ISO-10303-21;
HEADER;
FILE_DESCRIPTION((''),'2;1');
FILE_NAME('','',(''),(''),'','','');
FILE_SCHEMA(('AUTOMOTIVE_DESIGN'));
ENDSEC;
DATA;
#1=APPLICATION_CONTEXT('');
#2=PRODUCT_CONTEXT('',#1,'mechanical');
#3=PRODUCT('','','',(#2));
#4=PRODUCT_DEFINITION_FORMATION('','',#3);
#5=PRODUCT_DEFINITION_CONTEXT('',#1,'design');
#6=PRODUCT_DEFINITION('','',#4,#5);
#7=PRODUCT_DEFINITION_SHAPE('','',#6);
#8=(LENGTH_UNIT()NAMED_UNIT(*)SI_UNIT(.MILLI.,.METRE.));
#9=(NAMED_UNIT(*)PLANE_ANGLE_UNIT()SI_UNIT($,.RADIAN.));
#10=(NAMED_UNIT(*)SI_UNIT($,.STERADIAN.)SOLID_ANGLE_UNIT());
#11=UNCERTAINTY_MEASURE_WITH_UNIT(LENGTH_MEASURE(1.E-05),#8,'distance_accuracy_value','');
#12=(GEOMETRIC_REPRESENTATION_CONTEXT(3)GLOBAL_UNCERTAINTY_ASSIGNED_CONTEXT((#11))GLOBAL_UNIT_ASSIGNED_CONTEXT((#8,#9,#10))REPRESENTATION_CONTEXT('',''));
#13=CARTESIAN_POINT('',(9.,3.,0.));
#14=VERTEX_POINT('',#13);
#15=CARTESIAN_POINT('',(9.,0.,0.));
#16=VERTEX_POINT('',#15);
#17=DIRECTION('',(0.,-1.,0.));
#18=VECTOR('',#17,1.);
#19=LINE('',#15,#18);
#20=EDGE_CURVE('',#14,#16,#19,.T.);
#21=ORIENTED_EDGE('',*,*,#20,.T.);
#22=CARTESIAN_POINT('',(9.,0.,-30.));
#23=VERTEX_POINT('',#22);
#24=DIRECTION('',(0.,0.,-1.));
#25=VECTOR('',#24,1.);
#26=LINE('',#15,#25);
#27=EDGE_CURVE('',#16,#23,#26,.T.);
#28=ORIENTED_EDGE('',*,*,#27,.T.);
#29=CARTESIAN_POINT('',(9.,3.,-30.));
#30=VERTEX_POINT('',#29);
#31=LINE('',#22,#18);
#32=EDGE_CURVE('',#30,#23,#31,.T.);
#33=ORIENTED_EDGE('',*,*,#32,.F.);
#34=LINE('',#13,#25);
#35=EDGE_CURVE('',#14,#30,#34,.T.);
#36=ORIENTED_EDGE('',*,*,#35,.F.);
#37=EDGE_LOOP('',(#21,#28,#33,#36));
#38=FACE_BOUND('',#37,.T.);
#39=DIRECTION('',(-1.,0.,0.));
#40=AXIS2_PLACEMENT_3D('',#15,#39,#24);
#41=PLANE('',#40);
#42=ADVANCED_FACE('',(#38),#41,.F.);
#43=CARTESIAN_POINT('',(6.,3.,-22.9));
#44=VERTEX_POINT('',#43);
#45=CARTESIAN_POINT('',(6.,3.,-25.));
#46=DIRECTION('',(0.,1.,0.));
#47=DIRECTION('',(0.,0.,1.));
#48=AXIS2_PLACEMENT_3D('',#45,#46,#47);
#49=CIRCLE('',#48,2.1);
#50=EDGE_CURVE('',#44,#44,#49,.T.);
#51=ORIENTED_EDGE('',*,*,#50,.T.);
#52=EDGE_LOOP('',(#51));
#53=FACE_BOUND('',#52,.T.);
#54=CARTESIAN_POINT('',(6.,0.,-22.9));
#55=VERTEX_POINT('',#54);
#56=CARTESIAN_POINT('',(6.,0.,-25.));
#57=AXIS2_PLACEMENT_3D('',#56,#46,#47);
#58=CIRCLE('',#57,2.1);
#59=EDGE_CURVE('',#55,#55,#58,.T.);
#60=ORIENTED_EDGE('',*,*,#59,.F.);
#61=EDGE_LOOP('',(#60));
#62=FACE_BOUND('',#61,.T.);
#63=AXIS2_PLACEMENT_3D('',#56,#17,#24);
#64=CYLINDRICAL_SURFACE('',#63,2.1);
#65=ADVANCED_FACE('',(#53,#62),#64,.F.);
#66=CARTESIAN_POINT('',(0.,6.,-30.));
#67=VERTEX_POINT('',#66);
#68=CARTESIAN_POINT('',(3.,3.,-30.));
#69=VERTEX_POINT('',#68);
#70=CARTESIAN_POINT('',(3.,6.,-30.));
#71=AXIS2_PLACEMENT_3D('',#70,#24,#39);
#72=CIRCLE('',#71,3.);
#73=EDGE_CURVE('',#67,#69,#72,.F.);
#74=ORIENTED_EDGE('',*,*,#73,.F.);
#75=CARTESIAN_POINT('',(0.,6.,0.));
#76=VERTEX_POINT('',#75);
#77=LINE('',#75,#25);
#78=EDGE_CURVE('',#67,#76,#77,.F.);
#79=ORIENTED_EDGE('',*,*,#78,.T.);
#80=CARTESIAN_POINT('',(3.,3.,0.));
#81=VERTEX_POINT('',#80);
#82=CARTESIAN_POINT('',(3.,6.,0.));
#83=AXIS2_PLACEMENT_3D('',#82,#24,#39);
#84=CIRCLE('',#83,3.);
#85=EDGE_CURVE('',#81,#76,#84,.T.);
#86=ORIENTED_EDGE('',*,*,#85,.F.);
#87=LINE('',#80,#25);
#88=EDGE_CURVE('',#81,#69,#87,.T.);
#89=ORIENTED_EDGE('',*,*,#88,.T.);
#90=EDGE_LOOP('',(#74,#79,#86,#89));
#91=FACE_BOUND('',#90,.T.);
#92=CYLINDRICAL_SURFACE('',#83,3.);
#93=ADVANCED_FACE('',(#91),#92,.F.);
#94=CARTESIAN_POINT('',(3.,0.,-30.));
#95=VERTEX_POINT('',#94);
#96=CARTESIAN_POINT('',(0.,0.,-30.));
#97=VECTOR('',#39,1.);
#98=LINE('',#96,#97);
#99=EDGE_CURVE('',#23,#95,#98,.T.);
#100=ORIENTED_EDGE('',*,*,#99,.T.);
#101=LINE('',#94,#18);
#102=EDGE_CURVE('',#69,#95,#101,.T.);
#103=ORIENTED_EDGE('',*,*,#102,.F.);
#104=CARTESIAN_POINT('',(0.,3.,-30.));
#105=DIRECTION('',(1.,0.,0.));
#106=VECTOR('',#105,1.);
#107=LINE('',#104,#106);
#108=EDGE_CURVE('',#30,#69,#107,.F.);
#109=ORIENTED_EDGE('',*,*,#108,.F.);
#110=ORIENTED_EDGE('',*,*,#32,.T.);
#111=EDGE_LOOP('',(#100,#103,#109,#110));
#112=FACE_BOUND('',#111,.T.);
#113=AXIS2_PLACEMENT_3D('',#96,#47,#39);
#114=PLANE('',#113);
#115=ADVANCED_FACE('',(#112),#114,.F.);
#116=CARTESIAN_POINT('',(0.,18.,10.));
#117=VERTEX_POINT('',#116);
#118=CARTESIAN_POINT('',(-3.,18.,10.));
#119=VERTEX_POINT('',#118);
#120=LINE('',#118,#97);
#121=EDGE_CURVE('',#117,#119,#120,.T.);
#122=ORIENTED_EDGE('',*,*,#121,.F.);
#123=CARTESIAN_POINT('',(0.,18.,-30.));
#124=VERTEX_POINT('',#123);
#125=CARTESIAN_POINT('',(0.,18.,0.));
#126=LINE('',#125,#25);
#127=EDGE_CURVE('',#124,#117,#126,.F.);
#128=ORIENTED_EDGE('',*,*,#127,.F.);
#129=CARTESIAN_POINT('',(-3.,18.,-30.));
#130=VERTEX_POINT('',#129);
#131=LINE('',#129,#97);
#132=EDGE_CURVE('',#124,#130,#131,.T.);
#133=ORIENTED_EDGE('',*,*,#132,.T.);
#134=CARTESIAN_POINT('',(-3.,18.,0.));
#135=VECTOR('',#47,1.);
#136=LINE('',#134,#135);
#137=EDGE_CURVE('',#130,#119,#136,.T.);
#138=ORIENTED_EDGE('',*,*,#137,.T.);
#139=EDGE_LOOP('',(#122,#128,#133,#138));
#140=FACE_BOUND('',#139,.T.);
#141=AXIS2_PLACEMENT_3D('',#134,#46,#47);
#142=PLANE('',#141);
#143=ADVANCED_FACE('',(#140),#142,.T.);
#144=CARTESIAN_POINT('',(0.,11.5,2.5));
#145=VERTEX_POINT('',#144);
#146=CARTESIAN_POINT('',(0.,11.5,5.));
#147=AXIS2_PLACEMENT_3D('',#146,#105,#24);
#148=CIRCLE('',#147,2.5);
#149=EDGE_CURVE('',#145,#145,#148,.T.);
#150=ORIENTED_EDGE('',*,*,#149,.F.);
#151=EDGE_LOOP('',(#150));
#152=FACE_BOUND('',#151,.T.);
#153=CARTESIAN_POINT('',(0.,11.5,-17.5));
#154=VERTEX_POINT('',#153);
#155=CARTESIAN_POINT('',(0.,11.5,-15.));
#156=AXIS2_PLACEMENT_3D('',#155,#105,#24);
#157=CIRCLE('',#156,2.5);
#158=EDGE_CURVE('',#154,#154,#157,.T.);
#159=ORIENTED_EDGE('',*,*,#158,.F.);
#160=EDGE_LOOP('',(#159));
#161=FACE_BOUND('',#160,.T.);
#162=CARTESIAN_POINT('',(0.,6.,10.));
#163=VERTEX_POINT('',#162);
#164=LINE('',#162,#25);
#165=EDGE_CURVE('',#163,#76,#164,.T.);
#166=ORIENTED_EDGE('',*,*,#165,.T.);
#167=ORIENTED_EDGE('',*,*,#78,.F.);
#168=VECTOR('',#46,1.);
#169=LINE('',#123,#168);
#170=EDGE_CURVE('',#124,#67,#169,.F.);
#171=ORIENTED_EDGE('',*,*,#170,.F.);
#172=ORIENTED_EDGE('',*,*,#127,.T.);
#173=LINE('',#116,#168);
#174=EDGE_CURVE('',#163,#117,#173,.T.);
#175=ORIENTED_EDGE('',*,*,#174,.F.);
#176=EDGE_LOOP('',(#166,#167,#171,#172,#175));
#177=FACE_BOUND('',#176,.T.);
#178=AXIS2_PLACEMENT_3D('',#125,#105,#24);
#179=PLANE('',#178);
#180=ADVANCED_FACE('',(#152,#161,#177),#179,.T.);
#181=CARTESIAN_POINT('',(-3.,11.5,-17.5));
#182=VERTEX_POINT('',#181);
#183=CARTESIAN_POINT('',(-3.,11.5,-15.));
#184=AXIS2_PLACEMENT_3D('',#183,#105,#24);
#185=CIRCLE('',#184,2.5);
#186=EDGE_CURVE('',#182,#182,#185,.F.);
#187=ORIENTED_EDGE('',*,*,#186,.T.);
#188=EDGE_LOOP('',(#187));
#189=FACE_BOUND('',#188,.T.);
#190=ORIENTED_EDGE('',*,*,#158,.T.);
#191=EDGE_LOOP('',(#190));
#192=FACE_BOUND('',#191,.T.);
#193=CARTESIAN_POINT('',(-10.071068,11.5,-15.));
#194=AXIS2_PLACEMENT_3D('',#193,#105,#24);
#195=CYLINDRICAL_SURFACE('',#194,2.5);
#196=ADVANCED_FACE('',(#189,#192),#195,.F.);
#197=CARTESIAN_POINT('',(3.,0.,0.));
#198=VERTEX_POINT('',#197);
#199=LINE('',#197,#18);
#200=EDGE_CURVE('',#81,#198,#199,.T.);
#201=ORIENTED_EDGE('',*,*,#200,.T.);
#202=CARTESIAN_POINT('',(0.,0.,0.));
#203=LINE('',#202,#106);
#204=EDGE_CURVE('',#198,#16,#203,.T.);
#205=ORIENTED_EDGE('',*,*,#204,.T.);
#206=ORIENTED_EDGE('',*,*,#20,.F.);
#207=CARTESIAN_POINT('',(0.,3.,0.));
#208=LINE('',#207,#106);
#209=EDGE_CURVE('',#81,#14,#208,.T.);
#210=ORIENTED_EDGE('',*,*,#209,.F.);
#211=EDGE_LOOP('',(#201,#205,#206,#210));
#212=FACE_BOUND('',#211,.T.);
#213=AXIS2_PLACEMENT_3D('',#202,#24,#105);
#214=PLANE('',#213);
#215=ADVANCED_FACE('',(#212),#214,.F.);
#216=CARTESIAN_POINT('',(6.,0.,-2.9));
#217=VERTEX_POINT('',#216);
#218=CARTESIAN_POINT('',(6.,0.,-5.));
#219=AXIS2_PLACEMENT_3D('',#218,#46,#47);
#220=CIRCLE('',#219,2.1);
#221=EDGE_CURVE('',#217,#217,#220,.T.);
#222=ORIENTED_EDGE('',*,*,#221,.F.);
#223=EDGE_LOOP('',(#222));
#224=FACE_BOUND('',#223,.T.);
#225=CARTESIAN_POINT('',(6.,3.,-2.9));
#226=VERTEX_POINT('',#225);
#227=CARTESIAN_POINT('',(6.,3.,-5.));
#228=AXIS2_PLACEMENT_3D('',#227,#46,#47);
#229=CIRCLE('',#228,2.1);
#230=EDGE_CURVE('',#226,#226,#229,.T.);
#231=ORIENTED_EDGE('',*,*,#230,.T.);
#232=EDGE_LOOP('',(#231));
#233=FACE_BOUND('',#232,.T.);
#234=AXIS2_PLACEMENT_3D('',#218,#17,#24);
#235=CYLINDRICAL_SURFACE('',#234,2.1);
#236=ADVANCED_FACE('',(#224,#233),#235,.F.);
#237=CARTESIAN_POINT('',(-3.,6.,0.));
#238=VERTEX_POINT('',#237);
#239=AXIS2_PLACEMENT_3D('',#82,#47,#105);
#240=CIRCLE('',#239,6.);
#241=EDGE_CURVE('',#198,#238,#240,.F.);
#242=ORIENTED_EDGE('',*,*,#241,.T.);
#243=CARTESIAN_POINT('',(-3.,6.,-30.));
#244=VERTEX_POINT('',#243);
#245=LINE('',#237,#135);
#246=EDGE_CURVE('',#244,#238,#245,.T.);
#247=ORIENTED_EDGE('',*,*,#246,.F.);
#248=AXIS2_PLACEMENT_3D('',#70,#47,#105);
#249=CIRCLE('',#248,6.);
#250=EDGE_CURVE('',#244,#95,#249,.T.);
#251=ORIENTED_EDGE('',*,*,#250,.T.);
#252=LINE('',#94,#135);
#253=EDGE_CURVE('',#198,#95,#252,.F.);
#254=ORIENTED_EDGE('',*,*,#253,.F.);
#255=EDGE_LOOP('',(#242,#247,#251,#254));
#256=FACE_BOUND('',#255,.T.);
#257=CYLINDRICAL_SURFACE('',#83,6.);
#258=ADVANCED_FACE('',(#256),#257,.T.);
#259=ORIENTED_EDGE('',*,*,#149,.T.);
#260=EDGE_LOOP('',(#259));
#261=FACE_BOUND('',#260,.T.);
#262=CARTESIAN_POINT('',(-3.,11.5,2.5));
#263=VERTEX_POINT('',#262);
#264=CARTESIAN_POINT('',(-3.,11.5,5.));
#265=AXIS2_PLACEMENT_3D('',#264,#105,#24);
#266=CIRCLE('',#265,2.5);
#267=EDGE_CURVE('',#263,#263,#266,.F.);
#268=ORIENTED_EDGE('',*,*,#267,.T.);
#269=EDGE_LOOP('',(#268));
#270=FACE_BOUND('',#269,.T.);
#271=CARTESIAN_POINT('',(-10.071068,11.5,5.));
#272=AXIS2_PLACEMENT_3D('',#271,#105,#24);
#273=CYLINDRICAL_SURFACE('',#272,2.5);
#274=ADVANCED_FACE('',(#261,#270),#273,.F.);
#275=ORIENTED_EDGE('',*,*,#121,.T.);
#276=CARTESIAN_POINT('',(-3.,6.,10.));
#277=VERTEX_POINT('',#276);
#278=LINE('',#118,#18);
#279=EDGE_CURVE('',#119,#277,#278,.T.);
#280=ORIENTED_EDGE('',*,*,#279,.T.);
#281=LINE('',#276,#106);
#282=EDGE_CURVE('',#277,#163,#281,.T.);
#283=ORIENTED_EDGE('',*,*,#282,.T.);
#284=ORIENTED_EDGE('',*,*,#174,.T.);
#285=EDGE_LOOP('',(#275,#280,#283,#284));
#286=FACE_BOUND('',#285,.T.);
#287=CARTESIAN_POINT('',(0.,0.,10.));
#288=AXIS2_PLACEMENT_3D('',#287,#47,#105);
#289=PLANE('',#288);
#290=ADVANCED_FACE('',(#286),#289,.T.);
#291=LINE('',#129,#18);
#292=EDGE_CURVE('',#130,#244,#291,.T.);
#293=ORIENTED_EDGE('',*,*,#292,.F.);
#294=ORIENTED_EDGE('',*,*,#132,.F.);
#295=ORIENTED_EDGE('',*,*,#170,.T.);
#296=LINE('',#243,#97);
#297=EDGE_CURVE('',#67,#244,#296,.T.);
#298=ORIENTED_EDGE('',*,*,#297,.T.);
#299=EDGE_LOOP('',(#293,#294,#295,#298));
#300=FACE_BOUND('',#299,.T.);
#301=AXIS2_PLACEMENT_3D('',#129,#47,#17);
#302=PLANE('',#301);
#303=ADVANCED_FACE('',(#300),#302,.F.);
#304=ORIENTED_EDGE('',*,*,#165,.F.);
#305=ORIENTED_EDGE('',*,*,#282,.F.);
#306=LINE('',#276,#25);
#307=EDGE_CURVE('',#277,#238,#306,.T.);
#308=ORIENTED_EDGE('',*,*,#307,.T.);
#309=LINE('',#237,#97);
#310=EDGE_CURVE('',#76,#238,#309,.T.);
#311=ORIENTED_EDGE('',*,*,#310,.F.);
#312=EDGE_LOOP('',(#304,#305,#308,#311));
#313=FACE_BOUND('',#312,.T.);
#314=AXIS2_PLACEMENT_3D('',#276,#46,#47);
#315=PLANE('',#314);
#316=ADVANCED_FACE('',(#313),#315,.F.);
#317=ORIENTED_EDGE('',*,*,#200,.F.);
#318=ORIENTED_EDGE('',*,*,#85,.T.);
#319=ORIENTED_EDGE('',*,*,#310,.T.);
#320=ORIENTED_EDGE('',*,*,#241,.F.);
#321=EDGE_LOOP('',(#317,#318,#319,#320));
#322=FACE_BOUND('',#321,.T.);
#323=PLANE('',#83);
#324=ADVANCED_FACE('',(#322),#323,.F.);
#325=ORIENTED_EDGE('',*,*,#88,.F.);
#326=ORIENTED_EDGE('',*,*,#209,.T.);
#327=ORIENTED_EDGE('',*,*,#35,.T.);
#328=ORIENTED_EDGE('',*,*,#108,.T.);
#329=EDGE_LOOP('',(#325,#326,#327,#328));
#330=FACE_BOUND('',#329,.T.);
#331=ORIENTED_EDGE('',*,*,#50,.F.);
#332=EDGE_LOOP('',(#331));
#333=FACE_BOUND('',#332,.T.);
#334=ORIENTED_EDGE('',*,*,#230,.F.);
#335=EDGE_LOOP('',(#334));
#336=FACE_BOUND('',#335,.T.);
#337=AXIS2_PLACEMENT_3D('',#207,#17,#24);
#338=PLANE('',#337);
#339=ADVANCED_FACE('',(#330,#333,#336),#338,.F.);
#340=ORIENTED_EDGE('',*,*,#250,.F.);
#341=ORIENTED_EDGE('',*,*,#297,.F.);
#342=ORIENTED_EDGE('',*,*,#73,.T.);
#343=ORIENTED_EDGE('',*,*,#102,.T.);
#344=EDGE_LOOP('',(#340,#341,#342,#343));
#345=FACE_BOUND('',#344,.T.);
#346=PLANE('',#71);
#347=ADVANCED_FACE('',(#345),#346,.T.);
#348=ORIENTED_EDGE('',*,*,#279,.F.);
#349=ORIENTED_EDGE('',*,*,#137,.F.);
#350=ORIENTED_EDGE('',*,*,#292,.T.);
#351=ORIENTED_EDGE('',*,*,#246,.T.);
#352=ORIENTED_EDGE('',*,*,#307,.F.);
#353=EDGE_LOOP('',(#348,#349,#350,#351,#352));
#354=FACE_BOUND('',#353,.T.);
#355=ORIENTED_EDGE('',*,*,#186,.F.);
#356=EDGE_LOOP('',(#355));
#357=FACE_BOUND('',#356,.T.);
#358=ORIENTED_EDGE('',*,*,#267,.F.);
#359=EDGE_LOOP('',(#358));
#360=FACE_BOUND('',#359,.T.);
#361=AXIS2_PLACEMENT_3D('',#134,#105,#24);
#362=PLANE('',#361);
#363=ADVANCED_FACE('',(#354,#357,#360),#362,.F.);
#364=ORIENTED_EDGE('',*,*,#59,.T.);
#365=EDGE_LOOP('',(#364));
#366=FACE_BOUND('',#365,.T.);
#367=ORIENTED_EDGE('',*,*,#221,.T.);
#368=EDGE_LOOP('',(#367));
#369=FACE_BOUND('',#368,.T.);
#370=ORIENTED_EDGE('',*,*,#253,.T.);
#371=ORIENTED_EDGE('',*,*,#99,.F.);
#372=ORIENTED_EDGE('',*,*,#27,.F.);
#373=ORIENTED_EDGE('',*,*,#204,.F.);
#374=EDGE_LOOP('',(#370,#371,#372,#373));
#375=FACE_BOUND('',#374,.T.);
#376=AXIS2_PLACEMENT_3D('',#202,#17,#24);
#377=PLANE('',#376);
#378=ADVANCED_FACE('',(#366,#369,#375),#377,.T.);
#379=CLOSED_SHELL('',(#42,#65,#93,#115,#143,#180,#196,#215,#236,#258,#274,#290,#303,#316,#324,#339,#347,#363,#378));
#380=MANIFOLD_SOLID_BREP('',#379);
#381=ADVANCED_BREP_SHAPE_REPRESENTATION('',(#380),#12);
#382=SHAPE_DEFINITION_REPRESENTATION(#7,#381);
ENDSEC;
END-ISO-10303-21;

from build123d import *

# Parameters (mm, degrees)
SKETCH2_W              = 9
SKETCH2_H              = 30
BOSS_EXTRUDE1_DEPTH    = 3
M5X0_8_TAPPED_HOLE1_D  = 4.2
SKETCH6_W              = 3
SKETCH6_H              = 30
BOSS_EXTRUDE2_DEPTH    = 18
CONVERT_SOLID5_START   = -30
CONVERT_SOLID5_DEPTH   = 30
CONVERT_SOLID5_2_DEPTH = 30
SKETCH24_W             = 3
SKETCH24_H             = 12
BOSS_EXTRUDE3_DEPTH    = 10
SKETCH21_R             = 2.5
CUT_EXTRUDE1_DEPTH     = 3


# Read off the part's stored shape, not the designer's step: Convert-Solid5
with BuildPart() as part:
    # Sketch2 → Boss-Extrude1 (new body)
    with BuildSketch(Plane(origin=(0, 0, 0), x_dir=(1, 0, 0), z_dir=(0, 1, 0))):
        with Locations((4.5, 15)):
            Rectangle(SKETCH2_W, SKETCH2_H)
    extrude(amount=BOSS_EXTRUDE1_DEPTH)

    # M5x0.8 Tapped Hole1 (through all)
    with Locations(Plane(origin=(0, 3, 0), x_dir=(1, 0, 0), z_dir=(0, 1, 0))):
        with Locations((6, 25), (6, 5)):
            Hole(M5X0_8_TAPPED_HOLE1_D / 2)

    # Sketch6 → Boss-Extrude2 (add)
    with BuildSketch(Plane(origin=(0, 0, 0), x_dir=(1, 0, 0), z_dir=(0, 1, 0))):
        with Locations((-1.5, 15)):
            Rectangle(SKETCH6_W, SKETCH6_H)
    extrude(amount=BOSS_EXTRUDE2_DEPTH)

    # Convert-Solid5 outline → Convert-Solid5 (cut)
    with BuildSketch(Plane.XY.offset(CONVERT_SOLID5_START)):
        with BuildLine():
            Line((-3, 0), (3, 0))
            ThreePointArc((3, 0), (-1.242640687, 1.757359313), (-3, 6))
            Line((-3, 6), (-3, 0))
        make_face()
    extrude(amount=CONVERT_SOLID5_DEPTH, mode=Mode.SUBTRACT)

    # Convert-Solid5 2 outline → Convert-Solid5 2 (add)
    with BuildSketch(Plane.XY.offset(CONVERT_SOLID5_START)):
        with BuildLine():
            Line((0, 3), (3, 3))
            ThreePointArc((3, 3), (0.878679656, 3.878679656), (0, 6))
            Line((0, 6), (0, 3))
        make_face()
    extrude(amount=CONVERT_SOLID5_2_DEPTH)

    # Sketch24 → Boss-Extrude3 (add)
    with BuildSketch(Plane.XY):
        with Locations((-1.5, 12)):
            Rectangle(SKETCH24_W, SKETCH24_H)
    extrude(amount=BOSS_EXTRUDE3_DEPTH)

    # Sketch21 → Cut-Extrude1 (cut)
    with BuildSketch(Plane(origin=(0, 0, 0), x_dir=(0, 0, -1), z_dir=(1, 0, 0))):
        with Locations((-5, 11.5)):
            Circle(SKETCH21_R)
        with Locations((15, 11.5)):
            Circle(SKETCH21_R)
    extrude(amount=-CUT_EXTRUDE1_DEPTH, mode=Mode.SUBTRACT)


solid = part.part
